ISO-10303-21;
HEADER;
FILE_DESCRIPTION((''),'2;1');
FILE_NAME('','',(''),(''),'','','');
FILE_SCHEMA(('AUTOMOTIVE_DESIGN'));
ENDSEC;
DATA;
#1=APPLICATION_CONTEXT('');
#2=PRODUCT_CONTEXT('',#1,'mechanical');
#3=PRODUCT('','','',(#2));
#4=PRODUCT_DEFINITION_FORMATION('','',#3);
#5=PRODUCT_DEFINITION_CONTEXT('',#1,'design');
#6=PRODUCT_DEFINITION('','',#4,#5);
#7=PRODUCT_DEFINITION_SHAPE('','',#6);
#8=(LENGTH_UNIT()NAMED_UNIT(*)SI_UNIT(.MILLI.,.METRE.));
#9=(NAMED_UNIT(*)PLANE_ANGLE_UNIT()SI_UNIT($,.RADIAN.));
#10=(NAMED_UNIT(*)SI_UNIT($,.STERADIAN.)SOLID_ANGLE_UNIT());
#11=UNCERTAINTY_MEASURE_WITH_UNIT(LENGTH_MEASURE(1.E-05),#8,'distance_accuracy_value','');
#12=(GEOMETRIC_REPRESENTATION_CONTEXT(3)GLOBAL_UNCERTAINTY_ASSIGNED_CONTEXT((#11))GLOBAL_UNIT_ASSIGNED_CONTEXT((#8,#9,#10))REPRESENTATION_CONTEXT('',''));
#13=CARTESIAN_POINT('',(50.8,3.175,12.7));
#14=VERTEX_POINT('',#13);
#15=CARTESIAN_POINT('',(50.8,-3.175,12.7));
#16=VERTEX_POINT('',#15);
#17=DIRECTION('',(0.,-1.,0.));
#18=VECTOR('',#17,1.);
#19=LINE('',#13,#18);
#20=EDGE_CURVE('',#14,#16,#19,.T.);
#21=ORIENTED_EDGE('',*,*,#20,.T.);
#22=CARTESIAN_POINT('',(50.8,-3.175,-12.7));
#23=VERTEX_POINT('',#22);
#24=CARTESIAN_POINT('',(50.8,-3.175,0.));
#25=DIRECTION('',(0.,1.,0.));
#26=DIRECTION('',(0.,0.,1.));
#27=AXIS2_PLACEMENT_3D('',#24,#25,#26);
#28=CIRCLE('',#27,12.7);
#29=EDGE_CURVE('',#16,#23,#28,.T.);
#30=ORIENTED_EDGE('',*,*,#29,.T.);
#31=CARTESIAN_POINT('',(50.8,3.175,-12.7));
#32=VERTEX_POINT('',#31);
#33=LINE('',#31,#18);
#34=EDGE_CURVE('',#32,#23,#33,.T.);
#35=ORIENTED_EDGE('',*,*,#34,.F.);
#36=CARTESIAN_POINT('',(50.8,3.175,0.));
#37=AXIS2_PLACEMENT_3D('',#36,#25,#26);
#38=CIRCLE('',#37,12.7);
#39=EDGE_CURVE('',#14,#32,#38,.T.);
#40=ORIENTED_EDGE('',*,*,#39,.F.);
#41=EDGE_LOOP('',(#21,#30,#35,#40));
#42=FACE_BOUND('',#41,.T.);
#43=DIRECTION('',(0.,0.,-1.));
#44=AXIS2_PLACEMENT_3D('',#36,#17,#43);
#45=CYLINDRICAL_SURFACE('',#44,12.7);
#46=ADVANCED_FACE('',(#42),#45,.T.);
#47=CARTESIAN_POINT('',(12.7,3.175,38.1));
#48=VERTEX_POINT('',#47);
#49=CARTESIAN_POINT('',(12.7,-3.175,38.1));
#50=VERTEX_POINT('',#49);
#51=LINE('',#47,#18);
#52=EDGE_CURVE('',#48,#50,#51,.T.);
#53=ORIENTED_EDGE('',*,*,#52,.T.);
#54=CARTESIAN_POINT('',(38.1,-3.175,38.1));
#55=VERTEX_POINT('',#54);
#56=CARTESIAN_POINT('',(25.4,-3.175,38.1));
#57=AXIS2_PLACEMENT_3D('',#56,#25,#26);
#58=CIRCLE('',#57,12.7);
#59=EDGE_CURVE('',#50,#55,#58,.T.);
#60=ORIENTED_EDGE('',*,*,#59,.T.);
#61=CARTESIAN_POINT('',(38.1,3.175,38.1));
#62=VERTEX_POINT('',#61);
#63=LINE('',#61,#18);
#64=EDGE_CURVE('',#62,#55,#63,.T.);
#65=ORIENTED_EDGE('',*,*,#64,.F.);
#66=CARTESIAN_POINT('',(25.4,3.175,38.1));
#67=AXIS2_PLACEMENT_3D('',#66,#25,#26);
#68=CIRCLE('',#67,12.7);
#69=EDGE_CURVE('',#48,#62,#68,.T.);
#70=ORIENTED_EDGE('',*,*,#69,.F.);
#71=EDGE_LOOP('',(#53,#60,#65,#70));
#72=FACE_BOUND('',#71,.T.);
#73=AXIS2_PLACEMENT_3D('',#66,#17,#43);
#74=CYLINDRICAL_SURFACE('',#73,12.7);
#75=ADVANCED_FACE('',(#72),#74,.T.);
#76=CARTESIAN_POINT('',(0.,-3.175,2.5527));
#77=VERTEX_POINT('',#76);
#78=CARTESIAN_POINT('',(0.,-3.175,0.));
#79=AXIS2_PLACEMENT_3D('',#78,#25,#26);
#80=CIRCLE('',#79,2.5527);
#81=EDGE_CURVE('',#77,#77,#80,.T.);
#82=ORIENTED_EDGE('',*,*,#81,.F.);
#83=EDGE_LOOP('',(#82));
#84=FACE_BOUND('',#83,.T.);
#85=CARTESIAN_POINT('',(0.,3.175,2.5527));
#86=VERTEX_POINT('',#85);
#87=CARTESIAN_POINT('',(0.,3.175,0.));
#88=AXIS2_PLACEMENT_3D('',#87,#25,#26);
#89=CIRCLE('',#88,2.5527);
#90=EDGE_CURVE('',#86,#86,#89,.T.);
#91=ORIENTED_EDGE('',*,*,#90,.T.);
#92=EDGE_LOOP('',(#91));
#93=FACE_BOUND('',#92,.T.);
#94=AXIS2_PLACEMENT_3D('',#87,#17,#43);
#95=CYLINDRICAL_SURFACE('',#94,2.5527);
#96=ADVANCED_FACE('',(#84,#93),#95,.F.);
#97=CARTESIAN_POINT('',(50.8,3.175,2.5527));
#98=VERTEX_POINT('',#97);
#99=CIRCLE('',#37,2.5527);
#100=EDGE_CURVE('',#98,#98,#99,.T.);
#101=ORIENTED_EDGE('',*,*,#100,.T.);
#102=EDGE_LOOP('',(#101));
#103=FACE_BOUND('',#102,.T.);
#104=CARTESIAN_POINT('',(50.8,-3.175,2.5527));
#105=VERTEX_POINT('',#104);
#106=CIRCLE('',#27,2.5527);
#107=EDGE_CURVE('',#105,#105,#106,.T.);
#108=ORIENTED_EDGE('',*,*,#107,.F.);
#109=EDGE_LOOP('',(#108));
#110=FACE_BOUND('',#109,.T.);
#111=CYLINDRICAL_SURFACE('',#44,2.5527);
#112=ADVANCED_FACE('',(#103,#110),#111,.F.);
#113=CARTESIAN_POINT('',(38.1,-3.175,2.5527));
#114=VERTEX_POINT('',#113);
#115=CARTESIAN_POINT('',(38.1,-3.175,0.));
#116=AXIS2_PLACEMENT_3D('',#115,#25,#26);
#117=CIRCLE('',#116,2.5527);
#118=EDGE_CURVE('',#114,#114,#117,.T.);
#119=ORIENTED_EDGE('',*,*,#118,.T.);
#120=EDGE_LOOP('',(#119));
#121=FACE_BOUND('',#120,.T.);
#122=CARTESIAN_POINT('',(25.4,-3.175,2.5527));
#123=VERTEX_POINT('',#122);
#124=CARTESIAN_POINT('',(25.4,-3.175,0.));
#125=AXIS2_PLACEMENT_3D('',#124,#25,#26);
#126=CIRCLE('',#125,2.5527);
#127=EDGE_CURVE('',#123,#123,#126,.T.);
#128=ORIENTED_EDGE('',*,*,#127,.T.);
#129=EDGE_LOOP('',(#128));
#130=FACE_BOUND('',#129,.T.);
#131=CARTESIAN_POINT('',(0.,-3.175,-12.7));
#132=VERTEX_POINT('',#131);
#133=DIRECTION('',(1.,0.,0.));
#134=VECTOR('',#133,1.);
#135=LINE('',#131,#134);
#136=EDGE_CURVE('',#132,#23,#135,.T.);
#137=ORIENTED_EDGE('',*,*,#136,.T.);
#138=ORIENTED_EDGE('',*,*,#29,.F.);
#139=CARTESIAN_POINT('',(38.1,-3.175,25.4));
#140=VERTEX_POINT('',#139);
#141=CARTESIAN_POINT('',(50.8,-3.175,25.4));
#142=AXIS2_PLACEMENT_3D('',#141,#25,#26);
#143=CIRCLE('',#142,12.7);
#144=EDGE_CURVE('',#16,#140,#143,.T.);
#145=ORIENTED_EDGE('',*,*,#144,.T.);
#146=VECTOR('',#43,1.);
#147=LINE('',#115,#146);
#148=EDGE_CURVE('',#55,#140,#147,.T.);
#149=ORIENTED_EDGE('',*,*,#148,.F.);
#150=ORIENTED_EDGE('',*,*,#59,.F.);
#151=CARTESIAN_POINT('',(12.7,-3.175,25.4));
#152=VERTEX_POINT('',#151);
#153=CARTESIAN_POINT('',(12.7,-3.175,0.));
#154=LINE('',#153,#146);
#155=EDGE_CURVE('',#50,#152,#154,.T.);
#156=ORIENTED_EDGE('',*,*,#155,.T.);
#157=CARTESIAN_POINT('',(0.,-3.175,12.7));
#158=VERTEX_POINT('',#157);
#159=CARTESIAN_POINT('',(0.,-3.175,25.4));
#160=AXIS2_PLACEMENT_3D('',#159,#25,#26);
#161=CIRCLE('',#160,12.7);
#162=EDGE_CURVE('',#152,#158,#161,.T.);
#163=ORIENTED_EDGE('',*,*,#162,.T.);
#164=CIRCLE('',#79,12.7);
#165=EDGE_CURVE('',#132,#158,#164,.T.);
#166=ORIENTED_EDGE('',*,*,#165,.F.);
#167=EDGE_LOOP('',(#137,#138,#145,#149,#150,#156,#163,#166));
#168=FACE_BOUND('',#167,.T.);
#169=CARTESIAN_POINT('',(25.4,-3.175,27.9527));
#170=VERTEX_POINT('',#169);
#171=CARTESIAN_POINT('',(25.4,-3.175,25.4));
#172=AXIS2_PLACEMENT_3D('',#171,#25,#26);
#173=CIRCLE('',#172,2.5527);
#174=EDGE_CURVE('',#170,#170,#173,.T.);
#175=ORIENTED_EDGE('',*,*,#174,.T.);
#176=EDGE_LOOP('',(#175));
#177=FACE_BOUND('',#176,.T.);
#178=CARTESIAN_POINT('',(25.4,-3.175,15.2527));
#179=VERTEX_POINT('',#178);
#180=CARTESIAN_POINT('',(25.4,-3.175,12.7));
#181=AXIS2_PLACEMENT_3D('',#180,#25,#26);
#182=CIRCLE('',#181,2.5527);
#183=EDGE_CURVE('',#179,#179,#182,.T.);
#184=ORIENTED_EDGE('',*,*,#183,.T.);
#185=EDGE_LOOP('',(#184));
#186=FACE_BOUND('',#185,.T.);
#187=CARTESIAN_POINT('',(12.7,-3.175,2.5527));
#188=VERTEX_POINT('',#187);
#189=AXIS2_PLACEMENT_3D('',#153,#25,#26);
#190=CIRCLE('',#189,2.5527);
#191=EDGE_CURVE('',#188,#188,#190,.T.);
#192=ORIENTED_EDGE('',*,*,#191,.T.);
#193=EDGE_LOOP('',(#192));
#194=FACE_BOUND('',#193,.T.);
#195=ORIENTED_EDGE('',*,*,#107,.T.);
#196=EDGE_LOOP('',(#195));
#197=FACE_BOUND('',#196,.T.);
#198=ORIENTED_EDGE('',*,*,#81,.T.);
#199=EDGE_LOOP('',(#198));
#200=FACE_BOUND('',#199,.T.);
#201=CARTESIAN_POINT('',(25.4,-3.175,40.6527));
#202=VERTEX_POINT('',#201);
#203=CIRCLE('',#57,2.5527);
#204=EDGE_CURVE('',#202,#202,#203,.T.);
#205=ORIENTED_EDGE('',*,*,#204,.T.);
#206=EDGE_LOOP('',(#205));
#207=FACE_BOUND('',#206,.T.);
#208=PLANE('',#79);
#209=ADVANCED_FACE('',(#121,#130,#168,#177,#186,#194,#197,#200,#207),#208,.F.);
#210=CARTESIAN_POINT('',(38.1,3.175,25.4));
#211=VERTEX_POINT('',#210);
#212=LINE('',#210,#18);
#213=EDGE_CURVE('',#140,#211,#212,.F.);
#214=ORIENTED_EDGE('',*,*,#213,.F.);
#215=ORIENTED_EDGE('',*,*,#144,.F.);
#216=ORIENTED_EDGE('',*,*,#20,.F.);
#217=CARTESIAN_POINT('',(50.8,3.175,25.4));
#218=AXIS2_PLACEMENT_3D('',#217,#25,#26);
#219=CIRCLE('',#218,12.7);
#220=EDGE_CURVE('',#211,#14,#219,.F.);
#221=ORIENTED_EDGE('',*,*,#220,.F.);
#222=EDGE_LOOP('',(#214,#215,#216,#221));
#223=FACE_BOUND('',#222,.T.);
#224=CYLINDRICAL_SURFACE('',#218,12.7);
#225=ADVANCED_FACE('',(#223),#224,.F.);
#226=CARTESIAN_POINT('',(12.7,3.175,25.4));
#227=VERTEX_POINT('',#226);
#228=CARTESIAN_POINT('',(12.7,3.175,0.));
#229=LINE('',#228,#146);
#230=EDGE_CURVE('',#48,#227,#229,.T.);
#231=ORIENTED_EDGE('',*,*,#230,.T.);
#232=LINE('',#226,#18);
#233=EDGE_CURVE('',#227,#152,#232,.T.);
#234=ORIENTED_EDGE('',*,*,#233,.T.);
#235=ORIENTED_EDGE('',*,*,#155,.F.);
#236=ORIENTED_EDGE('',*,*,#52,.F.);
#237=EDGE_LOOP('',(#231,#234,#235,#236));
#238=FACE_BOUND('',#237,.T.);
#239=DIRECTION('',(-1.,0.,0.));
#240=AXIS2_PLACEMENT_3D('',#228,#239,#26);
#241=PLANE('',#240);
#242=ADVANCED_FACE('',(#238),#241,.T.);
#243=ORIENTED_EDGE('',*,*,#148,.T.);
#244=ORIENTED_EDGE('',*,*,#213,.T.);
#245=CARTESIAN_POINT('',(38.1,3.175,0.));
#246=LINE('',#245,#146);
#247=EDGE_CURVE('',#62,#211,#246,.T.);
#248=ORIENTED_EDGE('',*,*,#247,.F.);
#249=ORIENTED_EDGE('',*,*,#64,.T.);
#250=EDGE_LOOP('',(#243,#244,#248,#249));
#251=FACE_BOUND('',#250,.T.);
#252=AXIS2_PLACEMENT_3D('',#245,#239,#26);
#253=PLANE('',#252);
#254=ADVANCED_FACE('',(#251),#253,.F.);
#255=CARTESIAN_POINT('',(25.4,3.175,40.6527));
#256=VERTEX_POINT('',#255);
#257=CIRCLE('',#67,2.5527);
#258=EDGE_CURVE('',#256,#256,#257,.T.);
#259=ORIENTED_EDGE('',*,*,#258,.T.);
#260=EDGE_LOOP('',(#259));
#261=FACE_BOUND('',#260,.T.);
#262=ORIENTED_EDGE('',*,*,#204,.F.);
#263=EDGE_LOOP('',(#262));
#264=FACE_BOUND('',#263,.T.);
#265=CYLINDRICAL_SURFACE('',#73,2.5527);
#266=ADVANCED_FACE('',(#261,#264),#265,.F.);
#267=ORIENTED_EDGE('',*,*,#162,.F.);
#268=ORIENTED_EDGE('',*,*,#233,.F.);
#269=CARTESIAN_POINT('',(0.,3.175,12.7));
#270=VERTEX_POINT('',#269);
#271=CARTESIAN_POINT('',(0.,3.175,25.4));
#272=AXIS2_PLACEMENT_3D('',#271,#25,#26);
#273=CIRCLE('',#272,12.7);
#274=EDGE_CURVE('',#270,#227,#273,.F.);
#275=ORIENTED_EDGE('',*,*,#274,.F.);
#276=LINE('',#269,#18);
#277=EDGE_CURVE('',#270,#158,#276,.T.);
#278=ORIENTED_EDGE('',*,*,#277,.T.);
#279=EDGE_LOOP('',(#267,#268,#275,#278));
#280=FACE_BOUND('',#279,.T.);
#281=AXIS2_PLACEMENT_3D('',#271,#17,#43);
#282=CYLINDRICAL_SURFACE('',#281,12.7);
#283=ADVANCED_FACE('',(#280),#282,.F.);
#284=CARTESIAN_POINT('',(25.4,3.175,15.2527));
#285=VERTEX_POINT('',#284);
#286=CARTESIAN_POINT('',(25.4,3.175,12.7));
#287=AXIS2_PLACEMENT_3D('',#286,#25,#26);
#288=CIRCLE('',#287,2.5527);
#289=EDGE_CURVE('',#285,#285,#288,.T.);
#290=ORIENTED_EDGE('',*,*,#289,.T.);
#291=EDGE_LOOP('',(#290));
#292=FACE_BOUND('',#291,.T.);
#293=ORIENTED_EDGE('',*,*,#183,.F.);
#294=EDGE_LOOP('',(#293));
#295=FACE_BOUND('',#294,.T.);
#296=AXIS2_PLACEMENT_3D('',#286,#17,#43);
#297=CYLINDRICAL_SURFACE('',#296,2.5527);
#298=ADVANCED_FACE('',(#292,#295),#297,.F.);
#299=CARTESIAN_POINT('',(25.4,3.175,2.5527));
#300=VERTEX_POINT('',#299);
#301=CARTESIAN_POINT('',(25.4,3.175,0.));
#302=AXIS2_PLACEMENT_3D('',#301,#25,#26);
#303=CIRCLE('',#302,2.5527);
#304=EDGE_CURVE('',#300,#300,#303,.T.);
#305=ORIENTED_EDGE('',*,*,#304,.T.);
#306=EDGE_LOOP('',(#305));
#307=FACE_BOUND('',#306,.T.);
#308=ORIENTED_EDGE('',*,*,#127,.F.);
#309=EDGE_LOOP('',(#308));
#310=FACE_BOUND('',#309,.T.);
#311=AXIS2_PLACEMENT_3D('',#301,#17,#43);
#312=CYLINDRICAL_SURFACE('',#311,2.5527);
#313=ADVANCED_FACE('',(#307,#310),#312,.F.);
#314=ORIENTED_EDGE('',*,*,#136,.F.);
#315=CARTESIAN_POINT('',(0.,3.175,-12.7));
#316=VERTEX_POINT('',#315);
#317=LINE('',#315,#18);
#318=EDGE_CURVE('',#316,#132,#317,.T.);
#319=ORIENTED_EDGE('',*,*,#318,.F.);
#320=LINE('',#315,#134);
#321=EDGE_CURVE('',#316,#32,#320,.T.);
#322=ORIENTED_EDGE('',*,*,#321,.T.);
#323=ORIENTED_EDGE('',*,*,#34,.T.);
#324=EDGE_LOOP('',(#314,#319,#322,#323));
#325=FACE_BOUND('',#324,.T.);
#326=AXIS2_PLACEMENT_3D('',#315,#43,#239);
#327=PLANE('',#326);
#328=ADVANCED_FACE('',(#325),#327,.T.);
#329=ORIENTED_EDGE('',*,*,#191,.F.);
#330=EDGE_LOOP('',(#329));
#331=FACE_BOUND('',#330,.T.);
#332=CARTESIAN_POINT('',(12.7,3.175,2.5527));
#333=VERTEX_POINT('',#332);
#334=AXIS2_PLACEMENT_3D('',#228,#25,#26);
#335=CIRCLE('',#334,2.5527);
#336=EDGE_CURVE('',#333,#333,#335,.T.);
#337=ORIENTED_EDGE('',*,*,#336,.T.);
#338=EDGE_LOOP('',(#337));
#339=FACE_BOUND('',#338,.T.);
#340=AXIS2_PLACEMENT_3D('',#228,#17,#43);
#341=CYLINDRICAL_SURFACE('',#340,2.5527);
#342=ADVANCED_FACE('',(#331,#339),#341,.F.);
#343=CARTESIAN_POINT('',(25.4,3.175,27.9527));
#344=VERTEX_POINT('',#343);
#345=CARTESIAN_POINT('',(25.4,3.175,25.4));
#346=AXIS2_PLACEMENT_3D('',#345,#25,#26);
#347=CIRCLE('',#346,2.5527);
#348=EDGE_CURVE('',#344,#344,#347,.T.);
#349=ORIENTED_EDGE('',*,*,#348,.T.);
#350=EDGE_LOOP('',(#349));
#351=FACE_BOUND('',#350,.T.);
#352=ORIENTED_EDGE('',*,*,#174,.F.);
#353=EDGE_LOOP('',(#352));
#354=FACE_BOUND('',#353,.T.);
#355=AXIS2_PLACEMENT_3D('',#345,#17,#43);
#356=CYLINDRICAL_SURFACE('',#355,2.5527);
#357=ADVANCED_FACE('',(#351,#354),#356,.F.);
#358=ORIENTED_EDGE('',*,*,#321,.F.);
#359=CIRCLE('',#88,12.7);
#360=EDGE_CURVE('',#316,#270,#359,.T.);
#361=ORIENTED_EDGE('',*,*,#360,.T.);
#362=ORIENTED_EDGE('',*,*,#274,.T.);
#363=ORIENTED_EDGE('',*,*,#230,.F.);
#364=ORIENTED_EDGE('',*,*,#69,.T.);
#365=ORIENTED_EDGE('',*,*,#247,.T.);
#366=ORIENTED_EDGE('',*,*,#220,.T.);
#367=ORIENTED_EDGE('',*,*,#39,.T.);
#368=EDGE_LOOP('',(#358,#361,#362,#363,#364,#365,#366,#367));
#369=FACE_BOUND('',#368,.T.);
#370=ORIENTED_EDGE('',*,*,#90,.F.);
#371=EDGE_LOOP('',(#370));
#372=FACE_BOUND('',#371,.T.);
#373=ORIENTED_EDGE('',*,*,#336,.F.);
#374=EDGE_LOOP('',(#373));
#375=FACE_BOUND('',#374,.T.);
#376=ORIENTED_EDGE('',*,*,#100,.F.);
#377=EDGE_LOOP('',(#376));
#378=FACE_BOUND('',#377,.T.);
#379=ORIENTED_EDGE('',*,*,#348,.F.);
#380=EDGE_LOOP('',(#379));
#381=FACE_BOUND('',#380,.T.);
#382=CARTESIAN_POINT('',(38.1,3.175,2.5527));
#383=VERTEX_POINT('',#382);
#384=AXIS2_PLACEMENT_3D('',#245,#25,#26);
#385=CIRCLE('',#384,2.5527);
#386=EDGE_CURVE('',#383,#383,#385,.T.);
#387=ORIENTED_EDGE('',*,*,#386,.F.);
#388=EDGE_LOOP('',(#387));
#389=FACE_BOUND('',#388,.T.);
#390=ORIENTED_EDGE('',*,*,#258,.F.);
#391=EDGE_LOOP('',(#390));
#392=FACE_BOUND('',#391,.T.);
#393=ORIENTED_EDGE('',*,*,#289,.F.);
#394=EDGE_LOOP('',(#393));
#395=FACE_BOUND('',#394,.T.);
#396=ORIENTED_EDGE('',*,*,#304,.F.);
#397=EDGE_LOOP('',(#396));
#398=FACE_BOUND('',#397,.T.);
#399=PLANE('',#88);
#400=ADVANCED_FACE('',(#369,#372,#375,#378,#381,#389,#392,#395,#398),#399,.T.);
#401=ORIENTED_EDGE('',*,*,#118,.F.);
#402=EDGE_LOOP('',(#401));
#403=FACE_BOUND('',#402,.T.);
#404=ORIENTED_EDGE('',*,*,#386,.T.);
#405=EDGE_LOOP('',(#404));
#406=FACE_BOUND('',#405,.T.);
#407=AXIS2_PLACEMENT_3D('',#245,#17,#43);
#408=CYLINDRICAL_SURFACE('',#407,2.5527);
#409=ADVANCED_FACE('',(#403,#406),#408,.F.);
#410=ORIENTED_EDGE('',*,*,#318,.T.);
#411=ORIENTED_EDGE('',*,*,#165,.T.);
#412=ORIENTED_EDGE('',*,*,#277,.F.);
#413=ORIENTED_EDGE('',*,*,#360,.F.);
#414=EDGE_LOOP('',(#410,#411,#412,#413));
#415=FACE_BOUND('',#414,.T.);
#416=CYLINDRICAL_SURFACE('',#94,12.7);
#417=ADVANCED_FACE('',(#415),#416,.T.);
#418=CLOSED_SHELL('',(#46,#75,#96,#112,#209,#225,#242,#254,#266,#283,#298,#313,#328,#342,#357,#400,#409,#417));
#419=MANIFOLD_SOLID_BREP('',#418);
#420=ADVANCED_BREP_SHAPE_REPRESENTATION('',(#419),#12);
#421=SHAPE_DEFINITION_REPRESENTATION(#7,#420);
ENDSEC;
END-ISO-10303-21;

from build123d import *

# Parameters (mm, degrees)
SKETCH1_R           = 2.5527
BOSS_EXTRUDE1_DEPTH = 3.175
FILLET1_R           = 12.7


with BuildPart() as part:
    # Sketch1 → Boss-Extrude1 (new, symmetric)
    # profile 1 of 4: a face of its own
    with BuildSketch(Plane(origin=(0, 0, 0), x_dir=(1, 0, 0), z_dir=(0, 1, 0))):
        with BuildLine():
            Line((25.4, 12.7), (0, 12.7))
            ThreePointArc((0, 12.7), (-12.7, 0), (0, -12.7))
            Line((0, -12.7), (12.7, -12.7))
            Line((12.7, -12.7), (12.7, -2.5527))
            ThreePointArc((12.7, -2.5527), (10.15053309, 0.128435844), (12.95654635, 2.539775829))
            ThreePointArc((12.95654635, 2.539775829), (17.367726132, 9.837305348), (25.4, 12.7))
        make_face()
        with Locations(Location((0, 0, 0), (0, 0, 270))):
            Circle(SKETCH1_R, mode=Mode.SUBTRACT)
    # profile 2 of 4: a face of its own
    with BuildSketch(Plane(origin=(0, 0, 0), x_dir=(1, 0, 0), z_dir=(0, 1, 0))):
        with BuildLine():
            ThreePointArc((37.84345365, 2.539775829), (33.432273868, 9.837305348), (25.4, 12.7))
            ThreePointArc((25.4, 12.7), (17.367726132, 9.837305348), (12.95654635, 2.539775829))
            ThreePointArc((12.95654635, 2.539775829), (14.593563196, 1.711927484), (15.2527, 0))
            ThreePointArc((15.2527, 0), (14.50503148, -1.80503148), (12.7, -2.5527))
            Line((12.7, -2.5527), (12.7, -12.7))
            Line((12.7, -12.7), (22.8473, -12.7))
            ThreePointArc((22.8473, -12.7), (25.4, -10.1473), (27.9527, -12.7))
            Line((27.9527, -12.7), (38.1, -12.7))
            Line((38.1, -12.7), (38.1, -2.5527))
            ThreePointArc((38.1, -2.5527), (35.55053309, -0.128435844), (37.84345365, 2.539775829))
        make_face()
        with Locations(Location((25.4, 0, 0), (0, 0, 270))):
            Circle(SKETCH1_R, mode=Mode.SUBTRACT)
    # profile 3 of 4: a face of its own
    with BuildSketch(Plane(origin=(0, 0, 0), x_dir=(1, 0, 0), z_dir=(0, 1, 0))):
        with BuildLine():
            Line((50.8, 12.7), (25.4, 12.7))
            ThreePointArc((25.4, 12.7), (33.432273868, 9.837305348), (37.84345365, 2.539775829))
            ThreePointArc((37.84345365, 2.539775829), (39.811927484, 1.893563196), (40.6527, 0))
            ThreePointArc((40.6527, 0), (39.90503148, -1.80503148), (38.1, -2.5527))
            Line((38.1, -2.5527), (38.1, -12.7))
            Line((38.1, -12.7), (50.8, -12.7))
            ThreePointArc((50.8, -12.7), (63.5, 0), (50.8, 12.7))
        make_face()
        with Locations(Location((50.8, 0, 0), (0, 0, 270))):
            Circle(SKETCH1_R, mode=Mode.SUBTRACT)
    # profile 4 of 4: a face of its own
    with BuildSketch(Plane(origin=(0, 0, 0), x_dir=(1, 0, 0), z_dir=(0, 1, 0))):
        with BuildLine():
            Line((22.8473, -12.7), (12.7, -12.7))
            Line((12.7, -12.7), (12.7, -38.1))
            ThreePointArc((12.7, -38.1), (25.4, -50.8), (38.1, -38.1))
            Line((38.1, -38.1), (38.1, -12.7))
            Line((38.1, -12.7), (27.9527, -12.7))
            ThreePointArc((27.9527, -12.7), (25.4, -15.2527), (22.8473, -12.7))
        make_face()
        with Locations(Location((25.4, -38.1, 0), (0, 0, 270))):
            Circle(SKETCH1_R, mode=Mode.SUBTRACT)
        with Locations(Location((25.4, -25.4, 0), (0, 0, 270))):
            Circle(SKETCH1_R, mode=Mode.SUBTRACT)
    extrude(amount=BOSS_EXTRUDE1_DEPTH, both=True)

    # Fillet1
    fillet1_edges = [part.edges().sort_by_distance(p)[0] for p in [
        (12.7, 0, 12.7),
        (38.1, 0, 12.7),
    ]]
    fillet(fillet1_edges, radius=FILLET1_R - 0.0001)  # a hair under: the kernel refuses the full size


solid = part.part
